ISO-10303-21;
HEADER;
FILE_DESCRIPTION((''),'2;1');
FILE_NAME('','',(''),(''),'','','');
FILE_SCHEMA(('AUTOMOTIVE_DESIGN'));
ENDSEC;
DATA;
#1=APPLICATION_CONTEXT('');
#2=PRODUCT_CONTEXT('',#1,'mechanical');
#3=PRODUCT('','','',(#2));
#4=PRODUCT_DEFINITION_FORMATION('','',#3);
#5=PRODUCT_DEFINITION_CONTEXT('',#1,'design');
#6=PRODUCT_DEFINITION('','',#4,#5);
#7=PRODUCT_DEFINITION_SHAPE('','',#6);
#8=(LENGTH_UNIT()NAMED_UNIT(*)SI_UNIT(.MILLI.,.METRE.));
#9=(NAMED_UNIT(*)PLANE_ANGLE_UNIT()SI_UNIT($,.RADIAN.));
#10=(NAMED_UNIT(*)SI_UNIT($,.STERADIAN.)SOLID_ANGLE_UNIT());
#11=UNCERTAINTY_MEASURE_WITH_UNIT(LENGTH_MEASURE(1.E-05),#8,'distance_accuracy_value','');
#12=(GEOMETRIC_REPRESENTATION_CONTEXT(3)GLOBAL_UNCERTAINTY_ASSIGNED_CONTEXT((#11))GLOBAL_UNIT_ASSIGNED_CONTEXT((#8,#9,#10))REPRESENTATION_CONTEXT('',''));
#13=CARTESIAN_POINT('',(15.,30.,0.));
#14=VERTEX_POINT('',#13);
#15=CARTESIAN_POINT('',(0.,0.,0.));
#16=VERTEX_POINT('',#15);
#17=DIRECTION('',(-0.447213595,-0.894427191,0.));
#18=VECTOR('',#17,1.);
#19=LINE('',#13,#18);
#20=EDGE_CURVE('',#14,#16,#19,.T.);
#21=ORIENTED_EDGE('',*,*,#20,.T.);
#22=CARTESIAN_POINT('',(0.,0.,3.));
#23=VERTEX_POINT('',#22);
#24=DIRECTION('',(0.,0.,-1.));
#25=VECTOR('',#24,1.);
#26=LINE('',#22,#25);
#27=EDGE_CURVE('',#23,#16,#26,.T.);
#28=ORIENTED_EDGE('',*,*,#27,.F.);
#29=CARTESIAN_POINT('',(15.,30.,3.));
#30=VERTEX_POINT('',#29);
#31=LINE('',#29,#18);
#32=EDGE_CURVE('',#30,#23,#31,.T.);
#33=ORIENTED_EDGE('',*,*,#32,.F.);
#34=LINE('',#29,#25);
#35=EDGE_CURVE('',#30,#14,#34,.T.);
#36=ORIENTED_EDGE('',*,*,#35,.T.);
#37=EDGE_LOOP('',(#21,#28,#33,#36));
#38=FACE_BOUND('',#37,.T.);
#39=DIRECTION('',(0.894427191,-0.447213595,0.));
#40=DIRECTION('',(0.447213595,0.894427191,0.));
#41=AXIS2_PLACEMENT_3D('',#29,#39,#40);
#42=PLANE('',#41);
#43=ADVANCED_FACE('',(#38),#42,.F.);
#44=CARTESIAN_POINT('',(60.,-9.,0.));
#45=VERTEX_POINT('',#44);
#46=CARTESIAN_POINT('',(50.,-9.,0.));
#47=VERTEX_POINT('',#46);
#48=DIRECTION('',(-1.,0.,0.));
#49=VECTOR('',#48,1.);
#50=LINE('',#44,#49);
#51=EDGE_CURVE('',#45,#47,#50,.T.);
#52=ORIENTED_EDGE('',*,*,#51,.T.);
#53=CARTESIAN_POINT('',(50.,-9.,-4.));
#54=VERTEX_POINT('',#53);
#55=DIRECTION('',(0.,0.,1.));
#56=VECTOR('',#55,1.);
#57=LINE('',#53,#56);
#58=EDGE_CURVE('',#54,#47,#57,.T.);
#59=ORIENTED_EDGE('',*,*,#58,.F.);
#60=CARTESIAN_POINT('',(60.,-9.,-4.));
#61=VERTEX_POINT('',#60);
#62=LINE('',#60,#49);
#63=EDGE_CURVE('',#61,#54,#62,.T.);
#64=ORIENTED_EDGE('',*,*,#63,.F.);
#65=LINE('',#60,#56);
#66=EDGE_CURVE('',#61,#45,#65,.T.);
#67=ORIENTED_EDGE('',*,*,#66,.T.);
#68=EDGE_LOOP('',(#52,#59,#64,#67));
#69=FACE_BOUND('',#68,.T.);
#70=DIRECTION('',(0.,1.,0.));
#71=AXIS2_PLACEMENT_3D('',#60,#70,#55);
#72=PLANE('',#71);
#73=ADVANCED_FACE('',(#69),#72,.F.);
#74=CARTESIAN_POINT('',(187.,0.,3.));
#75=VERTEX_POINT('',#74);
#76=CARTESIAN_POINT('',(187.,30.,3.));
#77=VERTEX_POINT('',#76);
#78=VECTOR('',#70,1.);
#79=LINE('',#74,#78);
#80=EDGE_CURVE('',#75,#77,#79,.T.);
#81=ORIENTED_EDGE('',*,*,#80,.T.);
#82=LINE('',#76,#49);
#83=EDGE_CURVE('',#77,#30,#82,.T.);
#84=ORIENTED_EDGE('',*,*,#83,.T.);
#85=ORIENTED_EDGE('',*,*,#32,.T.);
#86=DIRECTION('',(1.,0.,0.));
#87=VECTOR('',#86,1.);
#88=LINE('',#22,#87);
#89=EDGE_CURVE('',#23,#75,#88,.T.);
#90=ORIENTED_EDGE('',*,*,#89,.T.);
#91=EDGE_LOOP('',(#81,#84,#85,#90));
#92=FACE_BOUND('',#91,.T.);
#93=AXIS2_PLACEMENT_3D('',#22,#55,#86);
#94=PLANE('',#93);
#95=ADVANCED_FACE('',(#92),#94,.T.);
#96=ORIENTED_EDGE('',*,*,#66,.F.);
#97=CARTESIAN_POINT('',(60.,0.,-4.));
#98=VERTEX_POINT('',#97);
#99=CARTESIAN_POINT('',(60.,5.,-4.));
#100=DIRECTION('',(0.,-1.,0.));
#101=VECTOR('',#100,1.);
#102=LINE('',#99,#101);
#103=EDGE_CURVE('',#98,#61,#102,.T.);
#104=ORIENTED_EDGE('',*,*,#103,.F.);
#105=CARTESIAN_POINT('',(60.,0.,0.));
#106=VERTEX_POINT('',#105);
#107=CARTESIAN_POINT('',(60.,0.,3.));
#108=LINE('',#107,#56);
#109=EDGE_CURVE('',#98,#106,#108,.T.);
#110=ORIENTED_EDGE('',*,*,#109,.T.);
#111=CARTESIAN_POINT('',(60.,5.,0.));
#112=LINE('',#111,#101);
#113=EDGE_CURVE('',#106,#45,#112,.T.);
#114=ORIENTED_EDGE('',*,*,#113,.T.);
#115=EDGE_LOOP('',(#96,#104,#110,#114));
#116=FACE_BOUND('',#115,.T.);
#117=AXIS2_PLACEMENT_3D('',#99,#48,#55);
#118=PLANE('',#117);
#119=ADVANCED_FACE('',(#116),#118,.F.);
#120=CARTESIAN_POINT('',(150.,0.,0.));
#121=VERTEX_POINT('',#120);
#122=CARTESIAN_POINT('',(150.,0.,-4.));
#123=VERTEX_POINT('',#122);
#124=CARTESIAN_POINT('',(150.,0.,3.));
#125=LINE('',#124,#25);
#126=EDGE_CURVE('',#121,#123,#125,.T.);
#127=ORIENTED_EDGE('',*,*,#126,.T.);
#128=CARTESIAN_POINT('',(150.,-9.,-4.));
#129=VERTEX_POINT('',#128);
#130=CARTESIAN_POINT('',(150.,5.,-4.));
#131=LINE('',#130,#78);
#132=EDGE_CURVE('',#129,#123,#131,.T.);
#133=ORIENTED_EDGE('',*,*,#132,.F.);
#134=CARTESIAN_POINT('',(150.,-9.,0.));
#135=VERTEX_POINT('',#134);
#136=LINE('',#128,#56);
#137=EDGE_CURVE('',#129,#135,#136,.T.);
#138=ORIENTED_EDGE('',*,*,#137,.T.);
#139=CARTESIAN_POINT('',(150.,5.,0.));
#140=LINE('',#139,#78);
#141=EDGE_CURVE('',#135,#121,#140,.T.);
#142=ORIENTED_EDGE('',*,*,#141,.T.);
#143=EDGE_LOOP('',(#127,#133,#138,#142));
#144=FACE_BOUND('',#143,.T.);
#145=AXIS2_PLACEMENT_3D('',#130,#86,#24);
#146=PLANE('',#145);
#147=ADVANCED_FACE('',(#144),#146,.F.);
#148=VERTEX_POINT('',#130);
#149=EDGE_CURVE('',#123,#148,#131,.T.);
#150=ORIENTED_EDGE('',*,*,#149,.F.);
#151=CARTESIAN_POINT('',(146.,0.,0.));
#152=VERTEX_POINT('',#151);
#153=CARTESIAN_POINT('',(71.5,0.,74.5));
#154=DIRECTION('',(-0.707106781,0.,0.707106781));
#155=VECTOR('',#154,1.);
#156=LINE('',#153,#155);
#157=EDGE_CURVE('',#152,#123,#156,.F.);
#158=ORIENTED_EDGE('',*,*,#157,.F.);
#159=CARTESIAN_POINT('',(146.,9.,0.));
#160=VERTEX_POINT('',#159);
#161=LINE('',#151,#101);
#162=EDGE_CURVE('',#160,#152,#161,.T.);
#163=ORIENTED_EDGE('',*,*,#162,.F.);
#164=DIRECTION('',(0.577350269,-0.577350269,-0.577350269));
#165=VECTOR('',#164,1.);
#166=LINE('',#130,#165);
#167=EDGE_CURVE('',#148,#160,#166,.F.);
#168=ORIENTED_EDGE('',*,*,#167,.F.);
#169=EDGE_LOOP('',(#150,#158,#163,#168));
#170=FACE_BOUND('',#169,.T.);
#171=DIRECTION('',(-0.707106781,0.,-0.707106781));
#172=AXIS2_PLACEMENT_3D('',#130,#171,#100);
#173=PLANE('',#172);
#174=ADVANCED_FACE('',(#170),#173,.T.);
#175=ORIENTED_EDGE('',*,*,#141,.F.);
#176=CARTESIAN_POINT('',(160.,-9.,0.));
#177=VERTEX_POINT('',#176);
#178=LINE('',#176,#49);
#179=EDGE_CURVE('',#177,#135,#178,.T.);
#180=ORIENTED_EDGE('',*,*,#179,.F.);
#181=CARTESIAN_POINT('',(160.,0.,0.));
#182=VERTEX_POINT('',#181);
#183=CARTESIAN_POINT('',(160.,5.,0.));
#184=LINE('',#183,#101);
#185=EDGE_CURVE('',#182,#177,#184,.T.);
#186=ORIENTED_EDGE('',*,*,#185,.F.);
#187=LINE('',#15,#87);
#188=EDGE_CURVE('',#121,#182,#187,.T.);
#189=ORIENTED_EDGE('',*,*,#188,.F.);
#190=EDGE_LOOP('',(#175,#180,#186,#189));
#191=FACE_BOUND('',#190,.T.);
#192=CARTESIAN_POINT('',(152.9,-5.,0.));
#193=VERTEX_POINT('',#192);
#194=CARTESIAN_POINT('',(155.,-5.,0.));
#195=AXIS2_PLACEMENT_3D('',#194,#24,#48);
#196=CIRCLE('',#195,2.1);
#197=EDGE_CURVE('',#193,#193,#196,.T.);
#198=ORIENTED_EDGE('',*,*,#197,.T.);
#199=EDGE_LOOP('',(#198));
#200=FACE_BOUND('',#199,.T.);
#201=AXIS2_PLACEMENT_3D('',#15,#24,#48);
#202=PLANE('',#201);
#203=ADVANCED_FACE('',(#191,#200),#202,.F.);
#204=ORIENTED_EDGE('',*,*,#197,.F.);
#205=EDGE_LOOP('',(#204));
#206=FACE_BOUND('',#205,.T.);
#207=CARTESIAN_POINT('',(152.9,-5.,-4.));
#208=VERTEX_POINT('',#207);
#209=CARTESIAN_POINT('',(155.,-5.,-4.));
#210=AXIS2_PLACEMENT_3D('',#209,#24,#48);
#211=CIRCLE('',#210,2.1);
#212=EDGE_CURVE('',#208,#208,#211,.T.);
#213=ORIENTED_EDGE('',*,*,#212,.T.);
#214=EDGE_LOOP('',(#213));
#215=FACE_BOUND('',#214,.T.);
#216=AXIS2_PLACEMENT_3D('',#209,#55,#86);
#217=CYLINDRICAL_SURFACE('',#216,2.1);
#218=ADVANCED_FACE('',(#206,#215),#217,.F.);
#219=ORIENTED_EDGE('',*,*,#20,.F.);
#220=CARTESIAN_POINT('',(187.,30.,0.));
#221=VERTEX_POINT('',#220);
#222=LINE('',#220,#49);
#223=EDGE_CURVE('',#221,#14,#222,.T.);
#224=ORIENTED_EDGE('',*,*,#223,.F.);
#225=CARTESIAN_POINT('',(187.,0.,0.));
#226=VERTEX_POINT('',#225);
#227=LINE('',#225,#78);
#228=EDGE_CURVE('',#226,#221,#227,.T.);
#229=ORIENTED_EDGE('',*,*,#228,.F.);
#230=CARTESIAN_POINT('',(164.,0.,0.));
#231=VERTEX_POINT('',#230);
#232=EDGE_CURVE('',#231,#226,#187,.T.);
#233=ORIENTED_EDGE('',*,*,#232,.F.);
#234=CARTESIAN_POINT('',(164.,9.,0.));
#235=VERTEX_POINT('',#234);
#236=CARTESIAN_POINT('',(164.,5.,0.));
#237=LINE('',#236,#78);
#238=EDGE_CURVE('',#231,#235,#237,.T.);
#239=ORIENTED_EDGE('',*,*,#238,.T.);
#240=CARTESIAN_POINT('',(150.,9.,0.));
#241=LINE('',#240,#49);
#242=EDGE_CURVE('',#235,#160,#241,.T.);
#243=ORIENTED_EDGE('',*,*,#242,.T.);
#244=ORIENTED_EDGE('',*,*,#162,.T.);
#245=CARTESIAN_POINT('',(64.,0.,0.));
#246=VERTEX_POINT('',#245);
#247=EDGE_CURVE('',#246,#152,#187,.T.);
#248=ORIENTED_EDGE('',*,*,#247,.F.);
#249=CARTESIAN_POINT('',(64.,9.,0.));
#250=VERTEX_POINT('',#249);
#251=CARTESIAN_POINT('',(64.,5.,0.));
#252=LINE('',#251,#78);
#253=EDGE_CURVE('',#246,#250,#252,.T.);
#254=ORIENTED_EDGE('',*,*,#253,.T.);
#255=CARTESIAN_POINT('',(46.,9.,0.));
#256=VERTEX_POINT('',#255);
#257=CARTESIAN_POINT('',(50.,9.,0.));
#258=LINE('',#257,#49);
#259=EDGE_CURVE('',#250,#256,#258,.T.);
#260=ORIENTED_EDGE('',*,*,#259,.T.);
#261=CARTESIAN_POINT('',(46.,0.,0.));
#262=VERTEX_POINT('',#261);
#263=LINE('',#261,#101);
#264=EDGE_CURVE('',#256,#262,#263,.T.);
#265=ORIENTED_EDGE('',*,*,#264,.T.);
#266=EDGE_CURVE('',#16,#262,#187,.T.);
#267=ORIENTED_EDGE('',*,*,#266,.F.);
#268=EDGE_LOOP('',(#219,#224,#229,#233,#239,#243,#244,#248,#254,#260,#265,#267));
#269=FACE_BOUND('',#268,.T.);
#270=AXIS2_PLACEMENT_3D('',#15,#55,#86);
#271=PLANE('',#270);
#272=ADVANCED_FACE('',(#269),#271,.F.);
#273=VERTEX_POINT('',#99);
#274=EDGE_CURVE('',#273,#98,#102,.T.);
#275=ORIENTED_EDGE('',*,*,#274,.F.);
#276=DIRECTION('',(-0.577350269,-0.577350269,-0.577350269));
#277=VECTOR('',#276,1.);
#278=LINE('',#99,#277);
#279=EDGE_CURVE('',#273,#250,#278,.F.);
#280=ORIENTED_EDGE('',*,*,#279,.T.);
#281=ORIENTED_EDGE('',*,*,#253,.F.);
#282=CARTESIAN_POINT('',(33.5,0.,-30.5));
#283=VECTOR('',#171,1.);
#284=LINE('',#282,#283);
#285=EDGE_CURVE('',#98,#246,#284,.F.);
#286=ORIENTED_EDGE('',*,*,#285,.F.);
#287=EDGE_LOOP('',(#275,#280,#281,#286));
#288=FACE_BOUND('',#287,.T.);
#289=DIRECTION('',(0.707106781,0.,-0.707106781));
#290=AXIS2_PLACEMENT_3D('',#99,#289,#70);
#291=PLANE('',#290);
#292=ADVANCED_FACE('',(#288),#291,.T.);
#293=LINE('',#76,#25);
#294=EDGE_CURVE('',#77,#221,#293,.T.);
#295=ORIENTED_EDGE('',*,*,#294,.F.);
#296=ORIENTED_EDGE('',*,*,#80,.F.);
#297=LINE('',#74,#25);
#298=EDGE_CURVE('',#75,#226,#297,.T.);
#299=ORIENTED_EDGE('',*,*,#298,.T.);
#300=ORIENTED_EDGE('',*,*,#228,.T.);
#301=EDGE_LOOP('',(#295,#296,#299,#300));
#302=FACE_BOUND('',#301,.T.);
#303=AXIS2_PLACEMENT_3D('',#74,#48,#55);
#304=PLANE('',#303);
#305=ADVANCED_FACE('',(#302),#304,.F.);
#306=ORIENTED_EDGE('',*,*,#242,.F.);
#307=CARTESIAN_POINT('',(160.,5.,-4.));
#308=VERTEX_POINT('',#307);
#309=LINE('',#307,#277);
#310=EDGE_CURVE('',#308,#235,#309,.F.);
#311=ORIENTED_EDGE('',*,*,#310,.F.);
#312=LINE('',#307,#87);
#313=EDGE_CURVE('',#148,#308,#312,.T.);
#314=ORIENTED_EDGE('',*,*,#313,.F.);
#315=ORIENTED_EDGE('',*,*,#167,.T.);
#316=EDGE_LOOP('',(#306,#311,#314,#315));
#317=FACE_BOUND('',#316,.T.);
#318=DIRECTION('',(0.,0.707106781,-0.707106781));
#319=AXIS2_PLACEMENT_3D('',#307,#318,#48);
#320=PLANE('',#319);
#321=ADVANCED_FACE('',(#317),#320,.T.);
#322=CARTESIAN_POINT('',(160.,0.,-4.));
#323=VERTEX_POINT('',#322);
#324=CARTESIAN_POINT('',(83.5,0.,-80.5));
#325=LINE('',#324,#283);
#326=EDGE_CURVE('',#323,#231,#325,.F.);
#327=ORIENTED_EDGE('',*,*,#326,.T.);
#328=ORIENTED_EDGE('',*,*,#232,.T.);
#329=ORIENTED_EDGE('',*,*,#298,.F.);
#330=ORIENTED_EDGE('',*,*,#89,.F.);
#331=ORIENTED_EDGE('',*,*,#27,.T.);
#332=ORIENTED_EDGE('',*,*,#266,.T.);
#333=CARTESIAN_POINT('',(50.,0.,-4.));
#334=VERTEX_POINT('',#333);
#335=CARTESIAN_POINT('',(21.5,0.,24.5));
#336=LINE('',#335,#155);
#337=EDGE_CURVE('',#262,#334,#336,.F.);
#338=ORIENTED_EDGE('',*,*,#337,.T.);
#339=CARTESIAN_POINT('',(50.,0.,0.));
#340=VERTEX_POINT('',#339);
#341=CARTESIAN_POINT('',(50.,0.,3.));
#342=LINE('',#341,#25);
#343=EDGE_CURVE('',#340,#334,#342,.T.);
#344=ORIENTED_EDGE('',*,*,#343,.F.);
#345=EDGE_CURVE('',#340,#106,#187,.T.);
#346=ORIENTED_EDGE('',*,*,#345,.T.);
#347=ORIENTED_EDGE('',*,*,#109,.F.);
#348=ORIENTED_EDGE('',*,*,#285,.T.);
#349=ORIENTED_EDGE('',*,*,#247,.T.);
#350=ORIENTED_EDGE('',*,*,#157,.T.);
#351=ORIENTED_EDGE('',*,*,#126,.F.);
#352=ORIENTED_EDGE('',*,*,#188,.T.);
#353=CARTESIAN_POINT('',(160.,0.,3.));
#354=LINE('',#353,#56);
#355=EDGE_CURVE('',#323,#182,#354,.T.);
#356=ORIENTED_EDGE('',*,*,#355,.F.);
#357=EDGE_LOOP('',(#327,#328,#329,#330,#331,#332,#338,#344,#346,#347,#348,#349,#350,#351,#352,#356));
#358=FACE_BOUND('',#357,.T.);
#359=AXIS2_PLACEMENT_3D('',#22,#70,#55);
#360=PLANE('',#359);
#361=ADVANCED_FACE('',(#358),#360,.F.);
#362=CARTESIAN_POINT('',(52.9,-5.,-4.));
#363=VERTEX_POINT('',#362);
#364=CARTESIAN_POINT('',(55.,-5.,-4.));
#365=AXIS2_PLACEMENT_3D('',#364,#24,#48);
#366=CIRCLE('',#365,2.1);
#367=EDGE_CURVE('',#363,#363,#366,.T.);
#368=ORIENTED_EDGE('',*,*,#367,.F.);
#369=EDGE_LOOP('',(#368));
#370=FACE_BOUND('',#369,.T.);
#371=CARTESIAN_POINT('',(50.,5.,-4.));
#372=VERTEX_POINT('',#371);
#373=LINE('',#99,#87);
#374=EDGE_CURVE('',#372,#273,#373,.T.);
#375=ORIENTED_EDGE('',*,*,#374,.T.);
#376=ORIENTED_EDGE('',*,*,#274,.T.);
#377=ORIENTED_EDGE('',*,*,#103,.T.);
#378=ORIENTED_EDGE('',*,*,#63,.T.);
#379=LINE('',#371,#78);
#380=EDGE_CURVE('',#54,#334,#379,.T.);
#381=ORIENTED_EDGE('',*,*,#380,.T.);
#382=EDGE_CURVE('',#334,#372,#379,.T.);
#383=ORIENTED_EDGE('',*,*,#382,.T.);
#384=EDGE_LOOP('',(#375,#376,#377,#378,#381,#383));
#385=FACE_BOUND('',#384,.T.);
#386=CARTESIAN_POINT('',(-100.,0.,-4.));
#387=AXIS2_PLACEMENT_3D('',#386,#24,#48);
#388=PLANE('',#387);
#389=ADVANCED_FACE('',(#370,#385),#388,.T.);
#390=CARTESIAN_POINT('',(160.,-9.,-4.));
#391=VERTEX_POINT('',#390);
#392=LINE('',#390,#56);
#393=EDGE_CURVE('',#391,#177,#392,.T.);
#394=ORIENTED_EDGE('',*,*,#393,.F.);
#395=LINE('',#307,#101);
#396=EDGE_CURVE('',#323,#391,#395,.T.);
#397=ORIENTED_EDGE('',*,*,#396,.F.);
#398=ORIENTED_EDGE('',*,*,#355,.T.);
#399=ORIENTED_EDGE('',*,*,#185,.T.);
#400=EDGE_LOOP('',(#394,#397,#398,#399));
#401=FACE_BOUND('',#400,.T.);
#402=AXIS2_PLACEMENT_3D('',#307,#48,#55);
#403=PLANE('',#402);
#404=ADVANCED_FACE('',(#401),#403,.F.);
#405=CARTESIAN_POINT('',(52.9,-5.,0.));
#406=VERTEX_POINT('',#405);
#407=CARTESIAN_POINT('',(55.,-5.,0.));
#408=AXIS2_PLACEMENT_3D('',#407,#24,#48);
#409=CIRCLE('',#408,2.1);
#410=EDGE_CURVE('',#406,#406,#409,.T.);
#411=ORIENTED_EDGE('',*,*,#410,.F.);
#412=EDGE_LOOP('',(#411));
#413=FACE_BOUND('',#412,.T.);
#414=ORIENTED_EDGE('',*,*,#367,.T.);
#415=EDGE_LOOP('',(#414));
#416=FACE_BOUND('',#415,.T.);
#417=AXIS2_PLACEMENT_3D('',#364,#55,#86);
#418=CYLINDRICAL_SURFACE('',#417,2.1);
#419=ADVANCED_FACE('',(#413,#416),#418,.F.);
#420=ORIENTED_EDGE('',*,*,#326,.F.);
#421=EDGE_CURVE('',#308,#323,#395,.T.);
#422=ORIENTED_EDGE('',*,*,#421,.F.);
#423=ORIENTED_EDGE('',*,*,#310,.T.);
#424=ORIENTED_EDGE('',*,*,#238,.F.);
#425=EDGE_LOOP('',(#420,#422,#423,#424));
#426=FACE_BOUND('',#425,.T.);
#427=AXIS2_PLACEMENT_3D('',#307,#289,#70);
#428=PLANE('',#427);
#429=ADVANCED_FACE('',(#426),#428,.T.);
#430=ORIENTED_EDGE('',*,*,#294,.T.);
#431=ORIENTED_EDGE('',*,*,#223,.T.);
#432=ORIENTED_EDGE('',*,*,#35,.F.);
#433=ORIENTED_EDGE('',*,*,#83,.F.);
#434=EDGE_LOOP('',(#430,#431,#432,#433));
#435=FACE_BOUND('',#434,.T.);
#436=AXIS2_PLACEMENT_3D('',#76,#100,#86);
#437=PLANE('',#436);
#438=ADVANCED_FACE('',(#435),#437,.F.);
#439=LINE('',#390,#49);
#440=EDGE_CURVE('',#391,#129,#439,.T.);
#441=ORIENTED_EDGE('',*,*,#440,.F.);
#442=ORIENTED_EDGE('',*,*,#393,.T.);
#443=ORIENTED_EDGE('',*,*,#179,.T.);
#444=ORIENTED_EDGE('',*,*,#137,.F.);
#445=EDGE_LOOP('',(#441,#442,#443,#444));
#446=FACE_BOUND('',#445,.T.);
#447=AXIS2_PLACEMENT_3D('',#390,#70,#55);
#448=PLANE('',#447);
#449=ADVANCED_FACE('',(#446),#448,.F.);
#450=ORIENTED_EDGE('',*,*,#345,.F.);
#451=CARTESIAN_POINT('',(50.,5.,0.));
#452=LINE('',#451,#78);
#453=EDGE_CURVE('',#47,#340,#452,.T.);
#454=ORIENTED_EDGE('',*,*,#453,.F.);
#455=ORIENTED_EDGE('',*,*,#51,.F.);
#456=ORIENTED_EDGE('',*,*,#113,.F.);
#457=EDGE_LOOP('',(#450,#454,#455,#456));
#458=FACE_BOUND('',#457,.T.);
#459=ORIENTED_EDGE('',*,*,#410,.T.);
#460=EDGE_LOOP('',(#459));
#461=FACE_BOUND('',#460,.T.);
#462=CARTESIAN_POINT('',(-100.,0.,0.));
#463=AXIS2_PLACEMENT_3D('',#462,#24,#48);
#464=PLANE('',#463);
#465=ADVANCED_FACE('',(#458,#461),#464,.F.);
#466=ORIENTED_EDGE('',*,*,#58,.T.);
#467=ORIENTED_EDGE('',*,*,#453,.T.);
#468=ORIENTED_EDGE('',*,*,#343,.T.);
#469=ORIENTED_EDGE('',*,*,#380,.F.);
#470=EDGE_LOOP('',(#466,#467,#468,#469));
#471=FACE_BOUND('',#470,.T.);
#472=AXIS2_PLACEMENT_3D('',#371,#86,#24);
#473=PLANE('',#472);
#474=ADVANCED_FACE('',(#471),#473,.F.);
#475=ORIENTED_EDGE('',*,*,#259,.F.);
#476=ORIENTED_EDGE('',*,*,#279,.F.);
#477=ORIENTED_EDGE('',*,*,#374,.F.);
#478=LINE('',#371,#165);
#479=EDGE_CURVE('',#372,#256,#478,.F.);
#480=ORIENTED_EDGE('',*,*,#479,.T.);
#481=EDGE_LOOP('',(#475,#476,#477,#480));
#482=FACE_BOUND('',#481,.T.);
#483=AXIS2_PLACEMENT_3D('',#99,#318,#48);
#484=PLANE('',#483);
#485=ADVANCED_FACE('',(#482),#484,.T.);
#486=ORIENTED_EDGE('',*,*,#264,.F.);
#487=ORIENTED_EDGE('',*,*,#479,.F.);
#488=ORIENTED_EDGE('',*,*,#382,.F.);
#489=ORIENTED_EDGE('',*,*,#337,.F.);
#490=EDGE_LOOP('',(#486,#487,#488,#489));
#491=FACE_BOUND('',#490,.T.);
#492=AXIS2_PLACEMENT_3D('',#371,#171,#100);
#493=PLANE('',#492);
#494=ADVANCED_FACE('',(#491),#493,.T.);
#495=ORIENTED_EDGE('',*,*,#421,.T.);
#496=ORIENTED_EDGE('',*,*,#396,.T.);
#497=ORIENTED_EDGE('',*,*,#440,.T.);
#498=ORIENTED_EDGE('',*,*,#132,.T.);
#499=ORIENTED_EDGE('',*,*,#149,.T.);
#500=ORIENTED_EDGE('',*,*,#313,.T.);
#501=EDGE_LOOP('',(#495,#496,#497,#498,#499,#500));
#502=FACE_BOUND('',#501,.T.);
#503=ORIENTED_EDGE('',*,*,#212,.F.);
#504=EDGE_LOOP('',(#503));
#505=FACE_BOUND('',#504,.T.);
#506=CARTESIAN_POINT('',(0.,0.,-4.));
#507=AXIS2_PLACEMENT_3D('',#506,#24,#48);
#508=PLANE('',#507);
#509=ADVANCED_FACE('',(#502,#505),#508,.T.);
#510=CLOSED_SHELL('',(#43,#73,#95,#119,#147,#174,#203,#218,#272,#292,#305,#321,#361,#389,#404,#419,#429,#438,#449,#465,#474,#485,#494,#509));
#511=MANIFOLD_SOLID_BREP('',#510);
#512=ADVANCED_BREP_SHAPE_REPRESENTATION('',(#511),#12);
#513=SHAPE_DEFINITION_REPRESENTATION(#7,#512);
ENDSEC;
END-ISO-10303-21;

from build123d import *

# Parameters (mm, degrees)
DODANIE_WYCI_GNI_CIE1_DEPTH       = 3
SZKIC2_W                          = 10
SZKIC2_H                          = 14
SZKIC2_R                          = 2.1
DODANIE_WYCI_GNI_CIE2_DEPTH       = 4
SFAZOWANIE1_SIZE                  = 4
SZYK_LINIOWY1_COUNT               = 2
SZYK_LINIOWY1_PITCH               = 100
SFAZOWANIE1_OF_SZYK_LINIOWY1_SIZE = 4


with BuildPart() as part:
    # Szkic1 → Dodanie-wyciągnięcie1 (new body)
    with BuildSketch(Plane.XY):
        Polygon((0, 0), (187, 0), (187, 30), (15, 30), align=None)
    extrude(amount=DODANIE_WYCI_GNI_CIE1_DEPTH)

    # Szkic2 → Dodanie-wyciągnięcie2 (add)
    with BuildSketch(Plane(origin=(0, 0, 0), x_dir=(-1, 0, 0), z_dir=(0, 0, -1))):
        with Locations((-155, -2)):
            Rectangle(SZKIC2_W, SZKIC2_H)
        with Locations((-155, -5)):
            Circle(SZKIC2_R, mode=Mode.SUBTRACT)
    dodanie_wyci_gni_cie2 = extrude(amount=DODANIE_WYCI_GNI_CIE2_DEPTH)

    # Sfazowanie1
    sfazowanie1_edges = [part.edges().sort_by_distance(p)[0] for p in [
        (160, 2.5, 0),
        (155, 5, 0),
        (150, 2.5, 0),
    ]]
    chamfer(sfazowanie1_edges, length=SFAZOWANIE1_SIZE - 0.0001)  # a hair under: the kernel refuses the full size

    # Szyk liniowy1: Dodanie-wyciągnięcie2 ×2
    with Locations(*[(-i * SZYK_LINIOWY1_PITCH, 0, 0) for i in range(1, SZYK_LINIOWY1_COUNT)]):
        add(dodanie_wyci_gni_cie2)

    # Sfazowanie1 of Szyk liniowy1
    sfazowanie1_of_szyk_liniowy1_edges = [part.edges().sort_by_distance(p)[0] for p in [
        (60, 2.5, 0),
        (55, 5, 0),
        (50, 2.5, 0),
    ]]
    chamfer(sfazowanie1_of_szyk_liniowy1_edges, length=SFAZOWANIE1_OF_SZYK_LINIOWY1_SIZE - 0.0001)  # a hair under: the kernel refuses the full size


solid = part.part
